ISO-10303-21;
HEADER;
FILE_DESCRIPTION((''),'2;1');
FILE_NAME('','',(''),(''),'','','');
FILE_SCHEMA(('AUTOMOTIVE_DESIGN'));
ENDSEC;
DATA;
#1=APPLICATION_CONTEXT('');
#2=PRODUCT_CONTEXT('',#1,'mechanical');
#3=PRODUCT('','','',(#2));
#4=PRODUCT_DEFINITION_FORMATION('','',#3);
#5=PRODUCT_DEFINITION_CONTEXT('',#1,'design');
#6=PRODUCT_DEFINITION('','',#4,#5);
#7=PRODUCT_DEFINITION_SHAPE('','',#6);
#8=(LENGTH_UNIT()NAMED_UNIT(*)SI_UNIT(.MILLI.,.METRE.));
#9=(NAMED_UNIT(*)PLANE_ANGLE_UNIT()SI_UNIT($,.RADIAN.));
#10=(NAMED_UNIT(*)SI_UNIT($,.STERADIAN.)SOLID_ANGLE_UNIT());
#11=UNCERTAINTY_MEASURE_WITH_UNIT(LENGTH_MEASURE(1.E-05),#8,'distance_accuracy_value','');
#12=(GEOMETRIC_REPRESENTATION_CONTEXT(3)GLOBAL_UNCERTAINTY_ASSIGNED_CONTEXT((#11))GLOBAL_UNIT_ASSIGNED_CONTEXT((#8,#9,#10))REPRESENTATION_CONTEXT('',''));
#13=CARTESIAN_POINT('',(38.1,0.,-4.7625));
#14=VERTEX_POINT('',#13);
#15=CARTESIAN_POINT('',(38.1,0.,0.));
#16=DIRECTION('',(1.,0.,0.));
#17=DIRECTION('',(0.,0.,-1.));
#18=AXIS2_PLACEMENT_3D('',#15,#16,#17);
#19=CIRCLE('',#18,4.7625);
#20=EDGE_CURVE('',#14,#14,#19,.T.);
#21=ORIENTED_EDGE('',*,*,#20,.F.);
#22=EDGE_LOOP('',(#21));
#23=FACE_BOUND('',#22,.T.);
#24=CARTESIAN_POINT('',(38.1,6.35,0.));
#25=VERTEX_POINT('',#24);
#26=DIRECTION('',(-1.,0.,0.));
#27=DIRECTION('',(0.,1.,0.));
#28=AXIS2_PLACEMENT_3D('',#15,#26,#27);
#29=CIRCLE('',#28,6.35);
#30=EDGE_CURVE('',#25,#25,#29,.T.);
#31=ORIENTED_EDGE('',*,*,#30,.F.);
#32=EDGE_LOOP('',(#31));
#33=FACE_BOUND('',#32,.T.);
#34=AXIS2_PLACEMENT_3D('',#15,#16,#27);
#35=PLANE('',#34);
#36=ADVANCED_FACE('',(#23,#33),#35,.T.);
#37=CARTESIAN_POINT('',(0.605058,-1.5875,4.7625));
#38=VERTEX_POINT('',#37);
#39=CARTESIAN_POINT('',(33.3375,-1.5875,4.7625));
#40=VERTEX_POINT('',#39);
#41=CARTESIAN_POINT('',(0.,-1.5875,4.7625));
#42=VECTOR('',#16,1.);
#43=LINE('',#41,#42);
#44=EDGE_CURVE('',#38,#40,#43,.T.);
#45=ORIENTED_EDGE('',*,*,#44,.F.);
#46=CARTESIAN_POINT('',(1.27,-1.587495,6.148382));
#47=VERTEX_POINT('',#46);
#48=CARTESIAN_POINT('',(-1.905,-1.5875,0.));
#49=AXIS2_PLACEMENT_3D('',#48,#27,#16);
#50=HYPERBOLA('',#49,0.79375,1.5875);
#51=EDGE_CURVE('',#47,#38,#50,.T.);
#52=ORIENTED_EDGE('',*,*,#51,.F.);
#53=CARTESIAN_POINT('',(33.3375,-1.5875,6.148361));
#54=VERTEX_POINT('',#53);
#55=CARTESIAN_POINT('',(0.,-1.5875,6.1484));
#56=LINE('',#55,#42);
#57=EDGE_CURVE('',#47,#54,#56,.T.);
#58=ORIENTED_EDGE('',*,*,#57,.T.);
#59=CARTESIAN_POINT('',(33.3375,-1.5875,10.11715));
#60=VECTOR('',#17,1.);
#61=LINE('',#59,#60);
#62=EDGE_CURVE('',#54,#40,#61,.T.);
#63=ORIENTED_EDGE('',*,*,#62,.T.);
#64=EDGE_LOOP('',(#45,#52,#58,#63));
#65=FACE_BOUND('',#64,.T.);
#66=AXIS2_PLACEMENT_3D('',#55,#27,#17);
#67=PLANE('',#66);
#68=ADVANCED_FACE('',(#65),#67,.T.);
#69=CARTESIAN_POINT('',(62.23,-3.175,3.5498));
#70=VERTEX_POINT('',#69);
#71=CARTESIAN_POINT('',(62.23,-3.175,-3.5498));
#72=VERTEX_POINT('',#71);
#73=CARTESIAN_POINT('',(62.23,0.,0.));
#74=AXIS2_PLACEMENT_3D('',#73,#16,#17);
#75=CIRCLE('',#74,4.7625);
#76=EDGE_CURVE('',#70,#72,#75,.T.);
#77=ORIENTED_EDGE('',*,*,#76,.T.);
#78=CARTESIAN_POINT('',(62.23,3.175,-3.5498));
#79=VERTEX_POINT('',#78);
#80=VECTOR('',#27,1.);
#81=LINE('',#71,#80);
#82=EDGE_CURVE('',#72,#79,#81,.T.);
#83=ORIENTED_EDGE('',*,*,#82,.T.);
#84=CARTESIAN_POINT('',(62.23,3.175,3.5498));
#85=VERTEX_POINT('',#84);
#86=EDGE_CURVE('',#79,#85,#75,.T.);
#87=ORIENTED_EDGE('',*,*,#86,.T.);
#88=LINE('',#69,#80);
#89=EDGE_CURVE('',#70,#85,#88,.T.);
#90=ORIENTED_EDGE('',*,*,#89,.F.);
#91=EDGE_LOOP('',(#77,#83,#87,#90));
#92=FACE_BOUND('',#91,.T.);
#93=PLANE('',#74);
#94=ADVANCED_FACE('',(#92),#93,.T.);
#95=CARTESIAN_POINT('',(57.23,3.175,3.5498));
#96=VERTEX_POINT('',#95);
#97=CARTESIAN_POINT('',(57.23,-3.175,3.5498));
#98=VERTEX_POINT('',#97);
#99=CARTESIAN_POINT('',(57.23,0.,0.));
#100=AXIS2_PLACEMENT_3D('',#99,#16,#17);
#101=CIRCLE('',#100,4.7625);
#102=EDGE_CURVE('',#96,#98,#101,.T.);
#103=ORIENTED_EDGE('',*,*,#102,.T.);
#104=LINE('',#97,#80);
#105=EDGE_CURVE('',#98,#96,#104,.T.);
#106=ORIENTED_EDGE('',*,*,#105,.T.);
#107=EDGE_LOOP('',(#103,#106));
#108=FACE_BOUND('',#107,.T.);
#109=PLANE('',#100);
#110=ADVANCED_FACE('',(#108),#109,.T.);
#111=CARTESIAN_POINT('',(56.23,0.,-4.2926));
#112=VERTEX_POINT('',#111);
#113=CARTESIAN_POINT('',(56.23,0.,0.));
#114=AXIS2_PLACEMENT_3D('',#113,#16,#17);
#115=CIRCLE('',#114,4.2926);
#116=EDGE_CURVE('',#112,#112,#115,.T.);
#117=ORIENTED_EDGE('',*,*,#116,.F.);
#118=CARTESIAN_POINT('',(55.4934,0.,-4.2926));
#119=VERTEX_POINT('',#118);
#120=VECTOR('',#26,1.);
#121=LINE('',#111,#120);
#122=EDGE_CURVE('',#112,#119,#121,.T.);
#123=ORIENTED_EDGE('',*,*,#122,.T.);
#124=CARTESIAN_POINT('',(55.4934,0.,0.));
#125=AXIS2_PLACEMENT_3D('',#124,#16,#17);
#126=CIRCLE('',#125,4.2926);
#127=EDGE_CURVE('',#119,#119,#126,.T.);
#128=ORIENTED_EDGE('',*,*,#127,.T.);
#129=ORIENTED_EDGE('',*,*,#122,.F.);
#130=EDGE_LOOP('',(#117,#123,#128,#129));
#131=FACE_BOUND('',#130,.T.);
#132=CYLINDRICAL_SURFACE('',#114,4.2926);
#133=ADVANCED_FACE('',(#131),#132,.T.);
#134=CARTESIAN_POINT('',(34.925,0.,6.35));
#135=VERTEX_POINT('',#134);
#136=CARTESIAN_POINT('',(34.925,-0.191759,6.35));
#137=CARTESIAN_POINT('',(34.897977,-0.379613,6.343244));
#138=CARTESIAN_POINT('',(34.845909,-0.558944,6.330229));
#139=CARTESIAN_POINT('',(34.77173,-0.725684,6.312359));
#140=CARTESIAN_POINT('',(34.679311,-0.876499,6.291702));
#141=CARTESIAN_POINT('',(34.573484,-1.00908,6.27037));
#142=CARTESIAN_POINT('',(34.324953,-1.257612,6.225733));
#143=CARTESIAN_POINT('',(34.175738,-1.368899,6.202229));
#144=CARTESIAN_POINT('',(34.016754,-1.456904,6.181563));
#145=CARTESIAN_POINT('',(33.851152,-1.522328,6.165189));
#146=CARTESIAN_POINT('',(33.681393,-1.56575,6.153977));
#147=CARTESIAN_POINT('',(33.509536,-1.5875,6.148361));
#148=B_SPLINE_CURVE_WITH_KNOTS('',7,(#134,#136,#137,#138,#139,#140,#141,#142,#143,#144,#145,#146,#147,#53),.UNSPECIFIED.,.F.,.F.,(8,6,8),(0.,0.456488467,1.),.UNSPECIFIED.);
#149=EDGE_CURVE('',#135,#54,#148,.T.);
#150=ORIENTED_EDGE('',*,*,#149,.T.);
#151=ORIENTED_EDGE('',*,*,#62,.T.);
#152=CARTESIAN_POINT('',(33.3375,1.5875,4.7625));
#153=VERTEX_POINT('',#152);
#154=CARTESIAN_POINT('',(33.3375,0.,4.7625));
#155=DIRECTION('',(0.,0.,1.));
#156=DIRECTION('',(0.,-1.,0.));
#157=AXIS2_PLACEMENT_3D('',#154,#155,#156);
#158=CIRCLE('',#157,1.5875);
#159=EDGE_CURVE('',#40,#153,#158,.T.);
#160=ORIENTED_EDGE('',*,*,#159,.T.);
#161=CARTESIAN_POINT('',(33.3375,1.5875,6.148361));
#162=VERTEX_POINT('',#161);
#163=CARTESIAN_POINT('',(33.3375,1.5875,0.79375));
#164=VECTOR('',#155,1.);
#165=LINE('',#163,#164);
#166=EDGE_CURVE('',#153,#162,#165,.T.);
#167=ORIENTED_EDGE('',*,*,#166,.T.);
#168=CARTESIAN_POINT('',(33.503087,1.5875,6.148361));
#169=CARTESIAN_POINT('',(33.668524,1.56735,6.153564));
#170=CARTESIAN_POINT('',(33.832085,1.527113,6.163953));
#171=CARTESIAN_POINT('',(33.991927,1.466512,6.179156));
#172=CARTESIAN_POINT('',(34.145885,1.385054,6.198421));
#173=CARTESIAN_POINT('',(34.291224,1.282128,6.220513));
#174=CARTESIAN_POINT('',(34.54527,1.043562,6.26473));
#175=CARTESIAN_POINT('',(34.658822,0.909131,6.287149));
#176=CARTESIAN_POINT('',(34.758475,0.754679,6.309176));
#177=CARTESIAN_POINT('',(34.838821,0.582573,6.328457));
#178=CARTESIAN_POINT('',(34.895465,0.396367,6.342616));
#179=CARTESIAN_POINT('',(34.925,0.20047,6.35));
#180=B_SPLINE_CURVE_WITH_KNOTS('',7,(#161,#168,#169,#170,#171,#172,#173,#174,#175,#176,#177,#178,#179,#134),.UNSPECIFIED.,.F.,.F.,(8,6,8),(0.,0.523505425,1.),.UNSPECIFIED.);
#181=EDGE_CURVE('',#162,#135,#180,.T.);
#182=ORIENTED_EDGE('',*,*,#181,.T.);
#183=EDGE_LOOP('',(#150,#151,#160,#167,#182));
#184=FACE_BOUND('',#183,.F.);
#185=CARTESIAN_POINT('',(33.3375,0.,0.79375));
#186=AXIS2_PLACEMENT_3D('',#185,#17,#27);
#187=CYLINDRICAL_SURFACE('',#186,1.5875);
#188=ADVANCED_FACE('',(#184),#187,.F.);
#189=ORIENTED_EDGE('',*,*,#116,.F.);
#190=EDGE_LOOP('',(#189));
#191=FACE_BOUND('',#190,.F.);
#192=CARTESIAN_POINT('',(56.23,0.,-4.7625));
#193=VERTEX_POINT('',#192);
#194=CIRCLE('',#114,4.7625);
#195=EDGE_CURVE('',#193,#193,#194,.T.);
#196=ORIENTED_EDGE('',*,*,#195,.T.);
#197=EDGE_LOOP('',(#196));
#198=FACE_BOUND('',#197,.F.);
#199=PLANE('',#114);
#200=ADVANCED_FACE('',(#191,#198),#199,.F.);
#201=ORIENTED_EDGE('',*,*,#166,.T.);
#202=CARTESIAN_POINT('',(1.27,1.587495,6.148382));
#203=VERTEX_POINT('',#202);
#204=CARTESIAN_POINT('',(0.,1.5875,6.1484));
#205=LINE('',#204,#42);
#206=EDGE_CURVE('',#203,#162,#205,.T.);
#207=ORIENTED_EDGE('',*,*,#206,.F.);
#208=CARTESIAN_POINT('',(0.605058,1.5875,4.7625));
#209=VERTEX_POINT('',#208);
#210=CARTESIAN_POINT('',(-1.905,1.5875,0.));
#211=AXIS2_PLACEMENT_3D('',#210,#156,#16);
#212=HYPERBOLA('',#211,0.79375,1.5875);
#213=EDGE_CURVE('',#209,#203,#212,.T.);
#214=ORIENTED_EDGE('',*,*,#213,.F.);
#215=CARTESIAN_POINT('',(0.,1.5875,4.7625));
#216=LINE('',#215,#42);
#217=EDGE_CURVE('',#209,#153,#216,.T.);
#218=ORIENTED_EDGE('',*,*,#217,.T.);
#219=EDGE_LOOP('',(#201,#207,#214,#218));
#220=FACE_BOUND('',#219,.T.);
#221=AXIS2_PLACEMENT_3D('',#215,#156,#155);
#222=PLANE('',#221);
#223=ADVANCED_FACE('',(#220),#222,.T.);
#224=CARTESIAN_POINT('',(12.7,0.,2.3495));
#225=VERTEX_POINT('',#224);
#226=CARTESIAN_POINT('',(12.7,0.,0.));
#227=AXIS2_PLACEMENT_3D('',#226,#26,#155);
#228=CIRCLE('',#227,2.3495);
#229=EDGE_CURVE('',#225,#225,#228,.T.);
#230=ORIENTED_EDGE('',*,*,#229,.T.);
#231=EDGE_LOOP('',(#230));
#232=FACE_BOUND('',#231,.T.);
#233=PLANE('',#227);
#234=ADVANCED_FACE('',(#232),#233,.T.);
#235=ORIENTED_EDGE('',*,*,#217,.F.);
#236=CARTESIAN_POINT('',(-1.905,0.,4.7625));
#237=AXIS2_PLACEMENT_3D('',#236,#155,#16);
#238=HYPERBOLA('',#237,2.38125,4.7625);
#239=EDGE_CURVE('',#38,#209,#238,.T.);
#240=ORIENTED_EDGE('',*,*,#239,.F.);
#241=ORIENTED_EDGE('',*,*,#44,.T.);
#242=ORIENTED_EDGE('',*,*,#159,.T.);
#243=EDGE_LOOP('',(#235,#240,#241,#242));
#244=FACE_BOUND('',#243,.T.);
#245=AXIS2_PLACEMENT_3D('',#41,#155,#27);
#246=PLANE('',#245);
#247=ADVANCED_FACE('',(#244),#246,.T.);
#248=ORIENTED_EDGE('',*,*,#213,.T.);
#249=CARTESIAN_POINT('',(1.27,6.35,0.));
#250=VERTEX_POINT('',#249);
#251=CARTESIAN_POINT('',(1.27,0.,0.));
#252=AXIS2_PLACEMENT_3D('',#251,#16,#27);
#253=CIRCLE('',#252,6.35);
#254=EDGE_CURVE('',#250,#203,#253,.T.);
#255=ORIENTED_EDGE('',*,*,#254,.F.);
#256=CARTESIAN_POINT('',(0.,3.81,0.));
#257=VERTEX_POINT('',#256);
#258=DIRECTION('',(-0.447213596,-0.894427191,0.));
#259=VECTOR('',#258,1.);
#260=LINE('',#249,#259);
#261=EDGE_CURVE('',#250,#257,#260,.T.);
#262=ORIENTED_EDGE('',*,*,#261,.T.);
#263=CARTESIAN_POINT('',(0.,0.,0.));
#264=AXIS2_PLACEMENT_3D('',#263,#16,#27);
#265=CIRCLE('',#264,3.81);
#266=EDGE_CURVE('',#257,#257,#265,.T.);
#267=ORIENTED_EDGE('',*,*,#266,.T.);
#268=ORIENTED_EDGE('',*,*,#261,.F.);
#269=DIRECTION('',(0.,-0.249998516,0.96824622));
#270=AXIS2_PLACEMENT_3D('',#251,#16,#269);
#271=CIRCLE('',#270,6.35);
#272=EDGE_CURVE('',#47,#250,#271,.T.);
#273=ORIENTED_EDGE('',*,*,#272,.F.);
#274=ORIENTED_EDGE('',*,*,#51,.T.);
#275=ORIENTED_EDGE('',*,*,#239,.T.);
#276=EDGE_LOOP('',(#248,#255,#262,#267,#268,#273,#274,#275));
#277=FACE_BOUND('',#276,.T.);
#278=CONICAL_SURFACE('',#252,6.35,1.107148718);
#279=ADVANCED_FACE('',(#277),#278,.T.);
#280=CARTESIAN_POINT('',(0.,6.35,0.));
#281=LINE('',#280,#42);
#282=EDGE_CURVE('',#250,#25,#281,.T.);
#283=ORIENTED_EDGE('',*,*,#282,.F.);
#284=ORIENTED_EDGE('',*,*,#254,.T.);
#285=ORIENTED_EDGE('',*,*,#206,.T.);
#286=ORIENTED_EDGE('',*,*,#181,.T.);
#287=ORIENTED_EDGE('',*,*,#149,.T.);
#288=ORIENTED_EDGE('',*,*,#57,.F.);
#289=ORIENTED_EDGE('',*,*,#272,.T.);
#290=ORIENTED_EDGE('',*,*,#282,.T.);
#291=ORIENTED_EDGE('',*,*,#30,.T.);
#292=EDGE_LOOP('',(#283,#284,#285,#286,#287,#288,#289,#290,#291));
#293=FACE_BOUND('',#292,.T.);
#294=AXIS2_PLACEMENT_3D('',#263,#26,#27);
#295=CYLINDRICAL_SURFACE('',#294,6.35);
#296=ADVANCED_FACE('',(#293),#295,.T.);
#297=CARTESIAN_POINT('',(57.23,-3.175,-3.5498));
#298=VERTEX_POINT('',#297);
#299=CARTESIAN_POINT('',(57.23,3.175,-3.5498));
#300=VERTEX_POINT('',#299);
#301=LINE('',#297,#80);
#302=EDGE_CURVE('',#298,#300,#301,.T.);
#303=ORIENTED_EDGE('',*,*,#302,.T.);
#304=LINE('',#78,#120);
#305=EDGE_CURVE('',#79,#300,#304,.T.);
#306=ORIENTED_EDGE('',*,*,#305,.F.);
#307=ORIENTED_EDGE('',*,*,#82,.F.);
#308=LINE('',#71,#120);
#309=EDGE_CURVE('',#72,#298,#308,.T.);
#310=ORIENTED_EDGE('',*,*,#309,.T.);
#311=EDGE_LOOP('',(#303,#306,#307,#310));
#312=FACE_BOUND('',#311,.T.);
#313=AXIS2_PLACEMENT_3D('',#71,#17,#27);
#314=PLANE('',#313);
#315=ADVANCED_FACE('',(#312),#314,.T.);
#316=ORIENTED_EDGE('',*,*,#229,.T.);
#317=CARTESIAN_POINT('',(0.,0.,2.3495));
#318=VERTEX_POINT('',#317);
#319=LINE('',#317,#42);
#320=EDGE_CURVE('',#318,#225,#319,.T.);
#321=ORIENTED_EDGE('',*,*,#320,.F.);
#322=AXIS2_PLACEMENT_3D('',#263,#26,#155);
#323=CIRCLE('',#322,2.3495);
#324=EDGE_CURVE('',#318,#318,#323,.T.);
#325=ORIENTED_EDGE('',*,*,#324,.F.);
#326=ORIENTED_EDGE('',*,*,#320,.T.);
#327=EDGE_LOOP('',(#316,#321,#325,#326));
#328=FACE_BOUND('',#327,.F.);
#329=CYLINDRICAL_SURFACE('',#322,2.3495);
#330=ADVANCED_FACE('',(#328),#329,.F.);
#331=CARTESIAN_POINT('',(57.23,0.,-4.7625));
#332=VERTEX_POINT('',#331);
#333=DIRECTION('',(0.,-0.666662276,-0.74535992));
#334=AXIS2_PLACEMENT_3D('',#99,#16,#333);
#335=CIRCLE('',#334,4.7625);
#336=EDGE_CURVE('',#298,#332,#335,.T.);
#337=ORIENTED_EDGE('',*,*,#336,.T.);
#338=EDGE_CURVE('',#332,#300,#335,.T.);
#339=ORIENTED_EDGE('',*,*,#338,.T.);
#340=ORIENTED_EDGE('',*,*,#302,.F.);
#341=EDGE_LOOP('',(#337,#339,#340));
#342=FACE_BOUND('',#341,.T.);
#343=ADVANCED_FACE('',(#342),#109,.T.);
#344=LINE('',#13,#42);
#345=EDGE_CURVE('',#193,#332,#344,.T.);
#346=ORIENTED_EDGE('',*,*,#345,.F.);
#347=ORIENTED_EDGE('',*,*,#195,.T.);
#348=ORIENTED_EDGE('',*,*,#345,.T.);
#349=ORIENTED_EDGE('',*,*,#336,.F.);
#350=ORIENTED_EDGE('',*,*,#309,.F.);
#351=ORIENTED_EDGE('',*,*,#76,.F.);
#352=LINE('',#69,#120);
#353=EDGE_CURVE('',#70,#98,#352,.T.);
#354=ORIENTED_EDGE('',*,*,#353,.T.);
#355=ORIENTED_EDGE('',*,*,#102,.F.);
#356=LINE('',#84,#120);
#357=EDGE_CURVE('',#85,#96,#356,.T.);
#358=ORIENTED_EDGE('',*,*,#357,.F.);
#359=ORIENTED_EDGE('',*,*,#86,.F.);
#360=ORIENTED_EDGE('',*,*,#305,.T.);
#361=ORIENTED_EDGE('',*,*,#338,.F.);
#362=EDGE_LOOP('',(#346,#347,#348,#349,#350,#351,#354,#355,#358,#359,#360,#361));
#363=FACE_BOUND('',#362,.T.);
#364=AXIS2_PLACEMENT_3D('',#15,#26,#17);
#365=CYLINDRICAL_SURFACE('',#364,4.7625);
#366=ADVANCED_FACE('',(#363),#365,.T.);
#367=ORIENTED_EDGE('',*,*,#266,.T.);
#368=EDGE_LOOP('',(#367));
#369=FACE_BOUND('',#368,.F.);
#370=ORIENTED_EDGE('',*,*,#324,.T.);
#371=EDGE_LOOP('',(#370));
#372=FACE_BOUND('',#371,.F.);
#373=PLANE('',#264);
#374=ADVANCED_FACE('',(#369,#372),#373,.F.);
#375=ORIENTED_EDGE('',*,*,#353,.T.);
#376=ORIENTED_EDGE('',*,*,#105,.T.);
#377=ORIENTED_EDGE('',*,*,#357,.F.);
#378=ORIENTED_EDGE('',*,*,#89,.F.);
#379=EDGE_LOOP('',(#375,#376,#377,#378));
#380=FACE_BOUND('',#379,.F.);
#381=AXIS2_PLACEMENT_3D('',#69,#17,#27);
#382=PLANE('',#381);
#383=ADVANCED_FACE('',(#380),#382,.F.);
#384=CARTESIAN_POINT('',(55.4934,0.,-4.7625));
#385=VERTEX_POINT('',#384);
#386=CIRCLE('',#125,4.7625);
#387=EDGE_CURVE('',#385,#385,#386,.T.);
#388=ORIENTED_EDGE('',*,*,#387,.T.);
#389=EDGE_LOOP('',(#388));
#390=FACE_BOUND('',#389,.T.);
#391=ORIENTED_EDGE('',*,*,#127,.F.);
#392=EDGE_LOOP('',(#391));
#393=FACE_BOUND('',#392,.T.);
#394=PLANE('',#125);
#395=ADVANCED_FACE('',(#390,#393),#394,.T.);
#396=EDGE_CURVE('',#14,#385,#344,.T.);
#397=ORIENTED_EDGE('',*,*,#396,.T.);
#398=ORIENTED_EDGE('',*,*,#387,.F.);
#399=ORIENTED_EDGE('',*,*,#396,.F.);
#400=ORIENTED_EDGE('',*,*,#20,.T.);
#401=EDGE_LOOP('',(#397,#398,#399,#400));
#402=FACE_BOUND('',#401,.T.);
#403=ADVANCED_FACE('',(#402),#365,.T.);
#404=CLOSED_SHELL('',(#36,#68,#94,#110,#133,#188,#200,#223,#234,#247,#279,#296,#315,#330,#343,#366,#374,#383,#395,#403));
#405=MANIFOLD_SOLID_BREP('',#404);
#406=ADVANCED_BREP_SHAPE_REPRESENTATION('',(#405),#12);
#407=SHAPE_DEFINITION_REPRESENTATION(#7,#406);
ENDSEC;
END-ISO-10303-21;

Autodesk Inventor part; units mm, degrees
ref_plane "YZ Plane" through (0, 0, 0) normal (1, 0, 0) x (0, 1, 0)
ref_plane "XZ Plane" through (0, 0, 0) normal (0, 1, 0) x (-1, 0, 0)
sketch "Sketch1" plane through (0, 0, 0) normal (1, 0, 0) x (0, 1, 0)
  circle A0 centre (0, 0) radius 6.35
  line L0 (0, 0) -> (0, 6.35) construction
  line L1 (-1.5875, 6.1484) -> (-1.5875, 4.7625)
  line L2 (-1.5875, 4.7625) -> (1.5875, 4.7625)
  line L3 (1.5875, 4.7625) -> (1.5875, 6.1484)
  point P0 (0, 4.7625)
  dimension "d0" = 12.7
  dimension "d2" = 1.5875
  dimension "d3" = 3.175
extrude "Extrusion1" add sketch "Sketch1" along normal blind 38.1
sketch "Sketch2" plane through (38.1, 0, 0) normal (1, 0, 0) x (0, 0, -1)
  circle A0 centre (0, 0) radius 6.35 projected
  circle A1 centre (0, 0) radius 4.7625
  dimension "d6" = 9.525
extrude "Extrusion2" add sketch "Sketch2" along normal blind 24.13 contours A1
extrude "Extrusion3" cut sketch "Sketch1" along normal blind 34.925 contours L3 L2 L1 A0 picked at (0.1781, 5.2842)
fillet "Fillet1" radius 1.5875 2 edges at (34.925, 1.5875, 5.4554) (34.925, -1.5875, 5.4554)
chamfer "Chamfer1" distance 1.27 distance2 2.54 1 edges at (0, 0, -6.35) measured on face at (25.4, -3.3725, 5.3804)
sketch "Sketch3" plane through (0, 0, 0) normal (-1, 0, 0) x (0, 0, 1)
  circle A0 centre (0, 0) radius 3.81 projected
  circle A1 centre (0, 0) radius 2.3495
  dimension "d16" = 4.699
extrude "Extrusion4" cut sketch "Sketch3" against normal blind 12.7 contours A1
thread "Thread1" size "10-32 UNF" class "2B" standard "ANSI Unified Screw Threads" full length
sketch "Sketch4" plane through (62.23, 0, 0) normal (1, 0, 0) x (0, 0, -1)
  circle A0 centre (0, 0) radius 4.7625 projected
  line L0 (-3.5498, -3.175) -> (-3.5498, 3.175)
  line L1 (3.5498, -3.175) -> (3.5498, 3.175)
  dimension "d24" = 6.35
extrude "Extrusion5" cut sketch "Sketch4" against normal blind 5 contours A0 L1 | L0 A0
ref_plane "Work Plane1" through (56.23, 0, 0) normal (1, 0, 0) x (0, 0, -1)
sketch "Sketch5" plane through (56.23, 0, 0) normal (1, 0, 0) x (0, 0, -1)
  circle A0 centre (0, 0) radius 4.7625 projected
  circle A1 centre (0, 0) radius 4.2926
  dimension "d28" = 8.5852
extrude "Extrusion6" cut sketch "Sketch5" against normal blind 0.7366
properties part number "Banebots 0.5x1.5 P60 Shaft" material "Steel, Carbon"
